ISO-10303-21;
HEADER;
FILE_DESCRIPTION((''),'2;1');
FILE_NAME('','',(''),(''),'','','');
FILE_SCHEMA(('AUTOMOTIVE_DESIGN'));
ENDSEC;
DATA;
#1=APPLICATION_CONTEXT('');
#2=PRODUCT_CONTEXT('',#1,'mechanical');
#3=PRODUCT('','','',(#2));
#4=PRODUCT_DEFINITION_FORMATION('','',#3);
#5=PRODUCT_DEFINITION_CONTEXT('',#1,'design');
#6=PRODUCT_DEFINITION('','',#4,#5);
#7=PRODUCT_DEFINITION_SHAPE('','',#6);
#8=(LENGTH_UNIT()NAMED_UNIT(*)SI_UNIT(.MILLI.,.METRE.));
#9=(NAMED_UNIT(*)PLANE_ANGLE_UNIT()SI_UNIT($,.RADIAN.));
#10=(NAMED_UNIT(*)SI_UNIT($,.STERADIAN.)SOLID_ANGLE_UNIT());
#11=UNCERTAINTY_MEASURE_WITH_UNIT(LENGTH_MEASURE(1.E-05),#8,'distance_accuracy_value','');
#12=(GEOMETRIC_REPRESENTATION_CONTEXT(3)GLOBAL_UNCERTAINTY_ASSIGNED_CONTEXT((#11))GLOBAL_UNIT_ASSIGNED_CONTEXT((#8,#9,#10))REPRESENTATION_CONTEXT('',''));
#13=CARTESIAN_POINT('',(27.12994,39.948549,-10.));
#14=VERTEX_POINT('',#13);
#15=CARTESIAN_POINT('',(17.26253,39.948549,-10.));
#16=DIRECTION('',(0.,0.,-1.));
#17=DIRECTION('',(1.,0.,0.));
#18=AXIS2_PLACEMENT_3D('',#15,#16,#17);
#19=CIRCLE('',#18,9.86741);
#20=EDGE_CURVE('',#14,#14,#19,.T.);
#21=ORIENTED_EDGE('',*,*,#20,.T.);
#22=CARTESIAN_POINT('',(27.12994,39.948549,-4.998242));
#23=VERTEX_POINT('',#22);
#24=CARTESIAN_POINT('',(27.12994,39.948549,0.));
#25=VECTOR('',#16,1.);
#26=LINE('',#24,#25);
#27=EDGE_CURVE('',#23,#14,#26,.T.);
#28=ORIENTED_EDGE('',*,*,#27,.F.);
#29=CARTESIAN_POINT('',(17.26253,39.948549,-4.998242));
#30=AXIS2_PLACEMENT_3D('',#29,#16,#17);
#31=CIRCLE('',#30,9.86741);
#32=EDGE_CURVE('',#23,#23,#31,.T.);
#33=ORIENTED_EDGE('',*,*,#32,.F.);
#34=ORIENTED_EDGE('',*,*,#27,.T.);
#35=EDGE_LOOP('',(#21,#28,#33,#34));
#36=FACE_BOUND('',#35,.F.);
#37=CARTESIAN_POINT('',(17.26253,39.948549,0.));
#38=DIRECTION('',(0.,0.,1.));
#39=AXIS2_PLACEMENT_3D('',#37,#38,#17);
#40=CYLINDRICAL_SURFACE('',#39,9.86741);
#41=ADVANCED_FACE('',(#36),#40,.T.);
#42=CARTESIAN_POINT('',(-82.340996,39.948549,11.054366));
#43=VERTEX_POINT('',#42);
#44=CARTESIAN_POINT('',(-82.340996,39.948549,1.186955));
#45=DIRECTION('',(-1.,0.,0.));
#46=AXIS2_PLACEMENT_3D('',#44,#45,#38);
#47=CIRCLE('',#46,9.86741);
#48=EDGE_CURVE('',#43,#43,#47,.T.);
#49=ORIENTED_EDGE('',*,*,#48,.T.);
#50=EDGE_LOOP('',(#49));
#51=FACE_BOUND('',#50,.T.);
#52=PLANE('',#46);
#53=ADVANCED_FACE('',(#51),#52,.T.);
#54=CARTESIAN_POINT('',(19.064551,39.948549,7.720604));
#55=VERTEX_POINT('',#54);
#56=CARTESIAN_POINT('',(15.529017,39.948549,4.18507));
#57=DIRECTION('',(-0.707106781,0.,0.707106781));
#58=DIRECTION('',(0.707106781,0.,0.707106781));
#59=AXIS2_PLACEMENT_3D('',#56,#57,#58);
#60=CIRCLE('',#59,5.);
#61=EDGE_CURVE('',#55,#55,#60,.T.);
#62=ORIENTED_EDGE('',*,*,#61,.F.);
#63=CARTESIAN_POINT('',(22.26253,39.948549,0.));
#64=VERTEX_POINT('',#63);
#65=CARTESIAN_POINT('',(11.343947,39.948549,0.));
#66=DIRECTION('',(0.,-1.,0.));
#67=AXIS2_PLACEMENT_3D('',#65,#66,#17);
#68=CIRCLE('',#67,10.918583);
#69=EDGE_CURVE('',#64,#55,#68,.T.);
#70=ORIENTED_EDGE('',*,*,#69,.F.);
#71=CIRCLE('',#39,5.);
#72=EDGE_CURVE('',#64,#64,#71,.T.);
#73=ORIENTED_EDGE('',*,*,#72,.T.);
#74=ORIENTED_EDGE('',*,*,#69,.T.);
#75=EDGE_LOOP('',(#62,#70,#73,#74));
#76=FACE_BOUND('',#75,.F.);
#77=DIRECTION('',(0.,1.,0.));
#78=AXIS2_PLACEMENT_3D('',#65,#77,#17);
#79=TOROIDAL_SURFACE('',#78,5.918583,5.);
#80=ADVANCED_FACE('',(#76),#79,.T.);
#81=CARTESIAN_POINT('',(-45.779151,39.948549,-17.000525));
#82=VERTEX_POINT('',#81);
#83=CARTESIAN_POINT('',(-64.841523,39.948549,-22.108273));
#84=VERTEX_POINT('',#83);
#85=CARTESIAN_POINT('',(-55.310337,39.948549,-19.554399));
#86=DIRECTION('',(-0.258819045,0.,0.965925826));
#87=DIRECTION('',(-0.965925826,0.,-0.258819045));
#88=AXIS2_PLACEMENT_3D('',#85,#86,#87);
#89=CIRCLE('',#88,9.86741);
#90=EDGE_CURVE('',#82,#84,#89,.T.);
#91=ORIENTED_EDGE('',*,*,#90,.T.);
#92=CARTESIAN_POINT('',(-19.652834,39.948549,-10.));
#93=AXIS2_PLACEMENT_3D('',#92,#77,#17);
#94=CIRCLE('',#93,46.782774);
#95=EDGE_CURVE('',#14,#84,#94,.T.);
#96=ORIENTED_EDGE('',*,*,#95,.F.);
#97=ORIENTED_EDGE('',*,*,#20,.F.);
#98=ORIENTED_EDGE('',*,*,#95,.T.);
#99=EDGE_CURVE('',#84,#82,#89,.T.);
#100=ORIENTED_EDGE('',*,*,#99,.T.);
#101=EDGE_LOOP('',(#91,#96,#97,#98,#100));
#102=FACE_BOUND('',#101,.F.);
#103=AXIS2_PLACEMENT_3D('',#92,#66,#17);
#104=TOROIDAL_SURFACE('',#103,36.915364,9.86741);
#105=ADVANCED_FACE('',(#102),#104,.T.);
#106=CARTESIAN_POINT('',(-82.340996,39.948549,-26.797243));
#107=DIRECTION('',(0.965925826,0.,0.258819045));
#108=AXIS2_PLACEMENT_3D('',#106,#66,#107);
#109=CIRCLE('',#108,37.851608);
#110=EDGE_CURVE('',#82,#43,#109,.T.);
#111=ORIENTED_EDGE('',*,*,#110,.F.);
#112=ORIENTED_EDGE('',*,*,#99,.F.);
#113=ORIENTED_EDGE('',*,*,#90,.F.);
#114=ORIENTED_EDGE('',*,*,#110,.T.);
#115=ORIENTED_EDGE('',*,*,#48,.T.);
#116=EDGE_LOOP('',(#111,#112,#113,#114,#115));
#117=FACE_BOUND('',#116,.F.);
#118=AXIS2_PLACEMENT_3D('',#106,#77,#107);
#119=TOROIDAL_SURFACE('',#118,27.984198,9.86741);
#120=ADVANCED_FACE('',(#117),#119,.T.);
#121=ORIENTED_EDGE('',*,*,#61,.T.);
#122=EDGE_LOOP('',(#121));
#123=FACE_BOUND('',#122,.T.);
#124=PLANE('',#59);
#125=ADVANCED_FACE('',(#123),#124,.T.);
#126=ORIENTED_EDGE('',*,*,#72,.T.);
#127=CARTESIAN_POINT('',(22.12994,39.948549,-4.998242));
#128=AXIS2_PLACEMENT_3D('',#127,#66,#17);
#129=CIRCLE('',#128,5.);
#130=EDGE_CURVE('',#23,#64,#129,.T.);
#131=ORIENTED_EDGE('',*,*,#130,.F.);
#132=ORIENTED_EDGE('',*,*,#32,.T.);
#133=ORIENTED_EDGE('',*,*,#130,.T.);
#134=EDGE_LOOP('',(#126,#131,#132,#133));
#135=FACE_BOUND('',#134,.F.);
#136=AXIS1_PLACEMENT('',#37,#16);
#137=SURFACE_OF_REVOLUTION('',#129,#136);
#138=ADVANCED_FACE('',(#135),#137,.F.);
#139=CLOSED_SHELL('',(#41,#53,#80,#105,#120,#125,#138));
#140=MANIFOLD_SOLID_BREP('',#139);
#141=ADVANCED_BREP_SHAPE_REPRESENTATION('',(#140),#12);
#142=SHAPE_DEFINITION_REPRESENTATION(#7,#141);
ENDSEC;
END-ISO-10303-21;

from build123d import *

# Parameters (mm, degrees)
F0_R     = 5
F1_ANGLE = 45
F3_R     = 9.8674102812
F3_R_2   = 5
F2_R     = 5
F4_DEPTH = 10
F6_R     = 9.8674102812
F7_ANGLE = 165
F8_R     = 9.8674102812
F9_ANGLE = 75


# Not quite as in the source:
# - a fillet or chamfer that OpenCascade refuses, or shapes differently, is made with other operations: its cross-section is extruded or revolved along the edge and cut away or added


with BuildPart() as f1:
    # F0 (on Top) → F1 (revolve)
    with BuildSketch(Plane.XY):
        with Locations((17.2625295818, 39.9485491216)):
            Circle(F0_R)
    revolve(axis=Axis((11.3439466804, 38.7977138162, 0), (0, -1, 0)), revolution_arc=F1_ANGLE)

    # F3 (on face) + F2 (on face) → F4 (join)
    with BuildSketch(Plane(origin=(0, 0, 0), x_dir=(1, 0, 0), z_dir=(0, 0, -1))):
        with Locations((17.2625295818, -39.9485491216)):
            Circle(F3_R)
        with Locations((17.2625295818, -39.9485491216)):
            Circle(F3_R_2, mode=Mode.SUBTRACT)
    with BuildSketch(Plane(origin=(0, 0, 0), x_dir=(1, 0, 0), z_dir=(0, 0, -1))):
        with Locations((17.2625295818, -39.9485491216)):
            Circle(F2_R)
    extrude(amount=F4_DEPTH)

    # F5: fillet of radius 5 on 1 edges, made by hand

    # F5_s1 → F5_t2 (revolve, cut)
    with BuildSketch(Plane.XZ.offset(-39.9485491216)):
        with BuildLine():
            ThreePointArc((27.129939863, -4.9982416875), (25.7120445931, -1.5099002903), (22.2625295818, 0))
            Line((22.2625295818, 0), (27.129939863, 0))
            Line((27.129939863, 0), (27.129939863, -4.9982416875))
        make_face()
    revolve(axis=Axis((17.2625295818, 39.9485491216, 0), (0, 0, -1)), mode=Mode.SUBTRACT)

    # F6 (on face) → F7 (revolve)
    with BuildSketch(Plane(origin=(0, 0, -10), x_dir=(1, 0, 0), z_dir=(0, 0, -1))):
        with Locations((17.2625295818, -39.9485491216)):
            Circle(F6_R)
    revolve(axis=Axis((-19.6528339293, 41.1798441783, -10), (0, 1, 0)), revolution_arc=F7_ANGLE)

    # F8 (on face) → F9 (revolve)
    with BuildSketch(Plane(origin=(1.1835097549, 0, -4.4169185366), x_dir=(0.9659258263, 0, 0.2588190451), z_dir=(-0.2588190451, 0, 0.9659258263))):
        with Locations((-58.4867338142, 39.9485491216)):
            Circle(F8_R)
    revolve(axis=Axis((-82.3409964635, 40.3092578053, -26.797242526), (0, -1, 0)), revolution_arc=F9_ANGLE)


solid = f1.part
